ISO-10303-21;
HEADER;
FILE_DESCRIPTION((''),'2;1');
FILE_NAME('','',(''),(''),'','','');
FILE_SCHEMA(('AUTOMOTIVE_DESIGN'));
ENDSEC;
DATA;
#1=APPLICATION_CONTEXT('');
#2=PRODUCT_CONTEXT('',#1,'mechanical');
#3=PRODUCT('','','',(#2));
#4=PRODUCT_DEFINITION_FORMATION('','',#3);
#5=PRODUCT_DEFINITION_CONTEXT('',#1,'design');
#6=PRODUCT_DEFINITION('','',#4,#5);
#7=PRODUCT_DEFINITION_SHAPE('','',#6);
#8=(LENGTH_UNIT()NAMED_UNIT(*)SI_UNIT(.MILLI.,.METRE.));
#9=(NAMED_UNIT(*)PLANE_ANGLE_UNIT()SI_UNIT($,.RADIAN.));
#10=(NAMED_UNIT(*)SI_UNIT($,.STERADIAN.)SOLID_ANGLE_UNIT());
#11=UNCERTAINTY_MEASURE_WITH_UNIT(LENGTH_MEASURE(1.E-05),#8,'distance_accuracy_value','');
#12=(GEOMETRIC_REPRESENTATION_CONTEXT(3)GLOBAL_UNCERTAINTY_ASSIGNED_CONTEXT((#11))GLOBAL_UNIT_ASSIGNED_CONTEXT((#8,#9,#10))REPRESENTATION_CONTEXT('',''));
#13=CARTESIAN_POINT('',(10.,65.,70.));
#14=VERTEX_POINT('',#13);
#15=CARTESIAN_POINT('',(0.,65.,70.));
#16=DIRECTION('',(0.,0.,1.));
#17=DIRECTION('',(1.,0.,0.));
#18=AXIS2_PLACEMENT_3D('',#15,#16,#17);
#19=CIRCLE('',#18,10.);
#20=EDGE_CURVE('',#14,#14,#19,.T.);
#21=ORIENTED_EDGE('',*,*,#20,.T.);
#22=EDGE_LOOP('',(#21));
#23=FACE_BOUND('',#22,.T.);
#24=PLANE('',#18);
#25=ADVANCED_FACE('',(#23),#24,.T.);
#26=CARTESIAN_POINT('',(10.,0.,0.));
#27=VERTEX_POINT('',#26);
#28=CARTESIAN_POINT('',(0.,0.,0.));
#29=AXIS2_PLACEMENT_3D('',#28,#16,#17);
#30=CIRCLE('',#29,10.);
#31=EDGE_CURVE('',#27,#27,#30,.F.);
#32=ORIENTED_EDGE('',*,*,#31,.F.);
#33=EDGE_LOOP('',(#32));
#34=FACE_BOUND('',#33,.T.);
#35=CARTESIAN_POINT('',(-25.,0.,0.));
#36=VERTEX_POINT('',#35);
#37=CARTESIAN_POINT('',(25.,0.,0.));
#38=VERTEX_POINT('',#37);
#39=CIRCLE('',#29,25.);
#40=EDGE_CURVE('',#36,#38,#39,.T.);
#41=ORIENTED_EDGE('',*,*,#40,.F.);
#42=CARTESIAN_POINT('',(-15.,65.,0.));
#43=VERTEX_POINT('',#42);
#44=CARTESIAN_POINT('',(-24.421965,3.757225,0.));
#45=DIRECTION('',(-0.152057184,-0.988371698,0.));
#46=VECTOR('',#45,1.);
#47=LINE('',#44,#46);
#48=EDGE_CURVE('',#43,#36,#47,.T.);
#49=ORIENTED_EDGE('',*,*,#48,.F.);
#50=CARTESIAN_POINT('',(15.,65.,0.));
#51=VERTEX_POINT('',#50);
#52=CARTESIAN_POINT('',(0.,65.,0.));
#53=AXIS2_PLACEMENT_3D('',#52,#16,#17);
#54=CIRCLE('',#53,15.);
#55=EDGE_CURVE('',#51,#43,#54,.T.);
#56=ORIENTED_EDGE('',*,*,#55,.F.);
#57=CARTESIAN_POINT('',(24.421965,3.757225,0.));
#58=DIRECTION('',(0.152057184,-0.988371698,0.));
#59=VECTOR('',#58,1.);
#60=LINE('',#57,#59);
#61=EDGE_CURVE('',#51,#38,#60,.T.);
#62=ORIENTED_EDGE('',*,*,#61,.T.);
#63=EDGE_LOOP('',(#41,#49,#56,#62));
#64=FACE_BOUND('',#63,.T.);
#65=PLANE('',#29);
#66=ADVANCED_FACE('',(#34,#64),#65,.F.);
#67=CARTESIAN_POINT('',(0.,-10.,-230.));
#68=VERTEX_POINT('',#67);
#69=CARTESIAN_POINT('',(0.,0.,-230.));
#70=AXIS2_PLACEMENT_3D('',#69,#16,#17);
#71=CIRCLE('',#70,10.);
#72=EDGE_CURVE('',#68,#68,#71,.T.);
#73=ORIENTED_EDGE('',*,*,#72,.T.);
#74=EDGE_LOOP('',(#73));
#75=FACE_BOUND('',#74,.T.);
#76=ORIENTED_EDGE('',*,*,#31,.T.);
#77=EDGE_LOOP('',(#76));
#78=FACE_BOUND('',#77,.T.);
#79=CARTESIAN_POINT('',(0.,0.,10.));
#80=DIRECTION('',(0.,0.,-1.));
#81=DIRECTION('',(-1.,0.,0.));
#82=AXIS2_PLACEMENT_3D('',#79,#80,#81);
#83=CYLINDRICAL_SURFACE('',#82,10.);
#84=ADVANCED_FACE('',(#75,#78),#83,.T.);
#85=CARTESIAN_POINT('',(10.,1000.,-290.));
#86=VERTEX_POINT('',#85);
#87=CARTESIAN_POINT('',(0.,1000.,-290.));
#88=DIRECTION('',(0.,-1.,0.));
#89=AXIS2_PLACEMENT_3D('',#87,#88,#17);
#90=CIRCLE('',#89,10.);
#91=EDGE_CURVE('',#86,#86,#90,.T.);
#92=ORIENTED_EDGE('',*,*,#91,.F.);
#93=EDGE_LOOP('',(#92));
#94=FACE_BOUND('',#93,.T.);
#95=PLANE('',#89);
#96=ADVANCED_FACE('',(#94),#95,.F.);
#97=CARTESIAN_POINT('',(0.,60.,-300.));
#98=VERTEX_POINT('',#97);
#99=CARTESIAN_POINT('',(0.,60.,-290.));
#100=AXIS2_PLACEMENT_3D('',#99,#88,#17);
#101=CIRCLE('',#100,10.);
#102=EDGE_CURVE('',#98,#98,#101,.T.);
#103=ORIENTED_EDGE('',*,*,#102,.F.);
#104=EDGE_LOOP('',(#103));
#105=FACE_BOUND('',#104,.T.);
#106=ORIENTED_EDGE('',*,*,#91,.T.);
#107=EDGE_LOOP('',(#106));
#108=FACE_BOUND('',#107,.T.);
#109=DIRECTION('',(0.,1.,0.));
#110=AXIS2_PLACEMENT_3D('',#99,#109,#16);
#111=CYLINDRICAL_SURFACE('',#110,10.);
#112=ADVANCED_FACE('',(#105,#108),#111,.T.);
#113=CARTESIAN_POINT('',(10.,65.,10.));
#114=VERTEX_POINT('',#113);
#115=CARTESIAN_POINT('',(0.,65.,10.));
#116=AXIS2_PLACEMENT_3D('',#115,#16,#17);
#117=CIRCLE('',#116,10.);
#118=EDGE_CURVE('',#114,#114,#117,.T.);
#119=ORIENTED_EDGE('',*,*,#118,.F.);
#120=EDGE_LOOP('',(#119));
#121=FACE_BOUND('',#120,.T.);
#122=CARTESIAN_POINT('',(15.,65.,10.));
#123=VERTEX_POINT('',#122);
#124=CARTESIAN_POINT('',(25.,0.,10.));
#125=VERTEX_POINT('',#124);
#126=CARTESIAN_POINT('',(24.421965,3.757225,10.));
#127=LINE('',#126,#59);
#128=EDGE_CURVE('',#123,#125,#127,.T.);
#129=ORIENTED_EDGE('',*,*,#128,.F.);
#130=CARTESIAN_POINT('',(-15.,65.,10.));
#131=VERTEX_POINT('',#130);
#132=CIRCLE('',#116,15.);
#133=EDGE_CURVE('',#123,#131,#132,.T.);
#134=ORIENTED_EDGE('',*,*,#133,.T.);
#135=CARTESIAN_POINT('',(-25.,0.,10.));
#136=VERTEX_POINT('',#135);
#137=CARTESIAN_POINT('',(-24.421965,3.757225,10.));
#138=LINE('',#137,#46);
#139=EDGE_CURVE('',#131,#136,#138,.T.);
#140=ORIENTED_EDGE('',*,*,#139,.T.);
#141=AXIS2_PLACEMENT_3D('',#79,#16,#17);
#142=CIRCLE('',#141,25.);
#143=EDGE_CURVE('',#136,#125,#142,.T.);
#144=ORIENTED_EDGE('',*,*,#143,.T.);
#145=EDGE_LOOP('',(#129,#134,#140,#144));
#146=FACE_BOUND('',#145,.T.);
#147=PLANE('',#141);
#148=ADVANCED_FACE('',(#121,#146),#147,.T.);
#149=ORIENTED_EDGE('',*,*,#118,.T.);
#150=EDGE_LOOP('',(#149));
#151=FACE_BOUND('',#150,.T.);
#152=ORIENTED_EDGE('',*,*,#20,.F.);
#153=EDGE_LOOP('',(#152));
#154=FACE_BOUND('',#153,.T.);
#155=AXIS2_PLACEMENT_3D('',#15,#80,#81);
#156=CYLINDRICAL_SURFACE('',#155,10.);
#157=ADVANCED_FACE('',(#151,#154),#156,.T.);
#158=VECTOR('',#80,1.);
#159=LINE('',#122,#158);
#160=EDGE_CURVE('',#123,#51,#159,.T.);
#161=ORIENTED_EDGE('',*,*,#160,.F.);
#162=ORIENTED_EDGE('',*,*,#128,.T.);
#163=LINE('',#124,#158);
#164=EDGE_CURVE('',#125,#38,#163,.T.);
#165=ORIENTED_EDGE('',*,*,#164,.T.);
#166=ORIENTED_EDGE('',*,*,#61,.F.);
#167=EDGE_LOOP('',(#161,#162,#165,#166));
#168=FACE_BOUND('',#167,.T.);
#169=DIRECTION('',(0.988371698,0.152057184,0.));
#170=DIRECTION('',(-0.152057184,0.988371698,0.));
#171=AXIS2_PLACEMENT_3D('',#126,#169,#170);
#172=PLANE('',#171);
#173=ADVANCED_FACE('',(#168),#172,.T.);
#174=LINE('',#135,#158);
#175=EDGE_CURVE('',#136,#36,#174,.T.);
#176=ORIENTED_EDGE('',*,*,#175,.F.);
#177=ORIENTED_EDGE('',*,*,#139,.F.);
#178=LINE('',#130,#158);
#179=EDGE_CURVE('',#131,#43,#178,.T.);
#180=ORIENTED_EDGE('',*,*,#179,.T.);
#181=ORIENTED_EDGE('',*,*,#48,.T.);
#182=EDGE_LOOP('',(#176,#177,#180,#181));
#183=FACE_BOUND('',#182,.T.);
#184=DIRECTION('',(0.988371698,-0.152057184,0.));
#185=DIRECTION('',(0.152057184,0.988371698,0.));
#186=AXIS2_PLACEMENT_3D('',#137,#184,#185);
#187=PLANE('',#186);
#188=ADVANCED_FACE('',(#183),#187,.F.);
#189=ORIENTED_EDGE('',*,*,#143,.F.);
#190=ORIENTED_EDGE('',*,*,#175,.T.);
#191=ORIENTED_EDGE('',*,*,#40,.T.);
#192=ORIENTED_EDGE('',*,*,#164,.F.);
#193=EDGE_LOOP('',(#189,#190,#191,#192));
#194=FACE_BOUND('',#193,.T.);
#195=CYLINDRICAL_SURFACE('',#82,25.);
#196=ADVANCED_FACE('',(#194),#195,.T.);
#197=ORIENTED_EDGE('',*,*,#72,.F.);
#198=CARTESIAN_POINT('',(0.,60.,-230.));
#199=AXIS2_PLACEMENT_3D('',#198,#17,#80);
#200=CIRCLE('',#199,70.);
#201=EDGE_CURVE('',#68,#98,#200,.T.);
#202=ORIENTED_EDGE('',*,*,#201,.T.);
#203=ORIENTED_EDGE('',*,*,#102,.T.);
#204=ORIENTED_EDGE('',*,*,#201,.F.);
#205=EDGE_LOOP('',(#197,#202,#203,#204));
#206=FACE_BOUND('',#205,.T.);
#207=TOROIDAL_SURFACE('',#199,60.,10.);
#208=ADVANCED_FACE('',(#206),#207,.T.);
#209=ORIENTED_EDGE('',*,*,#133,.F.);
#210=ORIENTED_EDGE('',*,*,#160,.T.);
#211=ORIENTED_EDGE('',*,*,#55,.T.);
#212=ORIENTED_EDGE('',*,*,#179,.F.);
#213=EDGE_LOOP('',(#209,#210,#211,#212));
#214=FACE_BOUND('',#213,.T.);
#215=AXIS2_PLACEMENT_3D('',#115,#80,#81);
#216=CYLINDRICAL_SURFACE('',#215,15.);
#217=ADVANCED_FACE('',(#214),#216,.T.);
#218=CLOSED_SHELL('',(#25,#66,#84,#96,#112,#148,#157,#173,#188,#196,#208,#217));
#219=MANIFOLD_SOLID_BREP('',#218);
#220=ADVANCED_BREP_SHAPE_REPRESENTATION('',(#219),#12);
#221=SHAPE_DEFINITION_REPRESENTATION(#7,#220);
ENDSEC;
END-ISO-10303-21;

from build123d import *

# Parameters (mm, degrees)
SKETCH1_R           = 10
BOSS_EXTRUDE1_DEPTH = 10
SKETCH2_R           = 10
BOSS_EXTRUDE2_DEPTH = 60
SWEEP1_START        = 59.9999999
SWEEP1_OUTLINE_R    = 10
SWEEP1_DEPTH        = 940.0000001
SWEEP1_START_2      = -230.0000001
SWEEP1_2_OUTLINE_R  = 10
SWEEP1_2_DEPTH      = 240.0000001
SWEEP1_3_OUTLINE_R  = 10
SWEEP1_3_ANGLE      = 90


with BuildPart() as part:
    # Sketch1 → Boss-Extrude1 (new body)
    with BuildSketch(Plane.XY):
        with BuildLine():
            ThreePointArc((15, 65), (0, 80), (-15, 65))
            Line((-15, 65), (-23.843930636, 7.514450867))
            Line((-23.843930636, 7.514450867), (-25, 0))
            ThreePointArc((-25, 0), (0, -25), (25, 0))
            Line((25, 0), (23.843930636, 7.514450867))
            Line((23.843930636, 7.514450867), (15, 65))
        make_face()
        Circle(SKETCH1_R, mode=Mode.SUBTRACT)
    extrude(amount=BOSS_EXTRUDE1_DEPTH)

    # Sketch2 → Boss-Extrude2 (add)
    with BuildSketch(Plane.XY.offset(10)):
        with Locations((0, 65)):
            Circle(SKETCH2_R)
    extrude(amount=BOSS_EXTRUDE2_DEPTH)

    # Sweep1 2 outline → Sweep1 2 (add)
    with BuildSketch(Plane.XY.offset(SWEEP1_START_2)):
        Circle(SWEEP1_2_OUTLINE_R)
    extrude(amount=SWEEP1_2_DEPTH)



with BuildPart() as body_2:
    # Sweep1: read off the stored shape, not the designer's step
    # Sweep1 outline → Sweep1 (new body)
    with BuildSketch(Plane(origin=(0, 0, 0), x_dir=(1, 0, 0), z_dir=(0, 1, 0)).offset(SWEEP1_START)):
        with Locations((0, 290)):
            Circle(SWEEP1_OUTLINE_R)
    extrude(amount=SWEEP1_DEPTH)


with BuildPart() as part_1:
    add(part.part)

    add(body_2.part)  # Sweep1 3 merges body 2
    # Sweep1 3 outline → Sweep1 3 (revolve)
    with BuildSketch(Plane(origin=(0, 60, -230), x_dir=(0, -1, 0), z_dir=(0, 0, 1))):
        with Locations((60, 0)):
            Circle(SWEEP1_3_OUTLINE_R)
    revolve(axis=Axis((0, 60, -230), (1, 0, 0)), revolution_arc=SWEEP1_3_ANGLE)


solid = part_1.part
